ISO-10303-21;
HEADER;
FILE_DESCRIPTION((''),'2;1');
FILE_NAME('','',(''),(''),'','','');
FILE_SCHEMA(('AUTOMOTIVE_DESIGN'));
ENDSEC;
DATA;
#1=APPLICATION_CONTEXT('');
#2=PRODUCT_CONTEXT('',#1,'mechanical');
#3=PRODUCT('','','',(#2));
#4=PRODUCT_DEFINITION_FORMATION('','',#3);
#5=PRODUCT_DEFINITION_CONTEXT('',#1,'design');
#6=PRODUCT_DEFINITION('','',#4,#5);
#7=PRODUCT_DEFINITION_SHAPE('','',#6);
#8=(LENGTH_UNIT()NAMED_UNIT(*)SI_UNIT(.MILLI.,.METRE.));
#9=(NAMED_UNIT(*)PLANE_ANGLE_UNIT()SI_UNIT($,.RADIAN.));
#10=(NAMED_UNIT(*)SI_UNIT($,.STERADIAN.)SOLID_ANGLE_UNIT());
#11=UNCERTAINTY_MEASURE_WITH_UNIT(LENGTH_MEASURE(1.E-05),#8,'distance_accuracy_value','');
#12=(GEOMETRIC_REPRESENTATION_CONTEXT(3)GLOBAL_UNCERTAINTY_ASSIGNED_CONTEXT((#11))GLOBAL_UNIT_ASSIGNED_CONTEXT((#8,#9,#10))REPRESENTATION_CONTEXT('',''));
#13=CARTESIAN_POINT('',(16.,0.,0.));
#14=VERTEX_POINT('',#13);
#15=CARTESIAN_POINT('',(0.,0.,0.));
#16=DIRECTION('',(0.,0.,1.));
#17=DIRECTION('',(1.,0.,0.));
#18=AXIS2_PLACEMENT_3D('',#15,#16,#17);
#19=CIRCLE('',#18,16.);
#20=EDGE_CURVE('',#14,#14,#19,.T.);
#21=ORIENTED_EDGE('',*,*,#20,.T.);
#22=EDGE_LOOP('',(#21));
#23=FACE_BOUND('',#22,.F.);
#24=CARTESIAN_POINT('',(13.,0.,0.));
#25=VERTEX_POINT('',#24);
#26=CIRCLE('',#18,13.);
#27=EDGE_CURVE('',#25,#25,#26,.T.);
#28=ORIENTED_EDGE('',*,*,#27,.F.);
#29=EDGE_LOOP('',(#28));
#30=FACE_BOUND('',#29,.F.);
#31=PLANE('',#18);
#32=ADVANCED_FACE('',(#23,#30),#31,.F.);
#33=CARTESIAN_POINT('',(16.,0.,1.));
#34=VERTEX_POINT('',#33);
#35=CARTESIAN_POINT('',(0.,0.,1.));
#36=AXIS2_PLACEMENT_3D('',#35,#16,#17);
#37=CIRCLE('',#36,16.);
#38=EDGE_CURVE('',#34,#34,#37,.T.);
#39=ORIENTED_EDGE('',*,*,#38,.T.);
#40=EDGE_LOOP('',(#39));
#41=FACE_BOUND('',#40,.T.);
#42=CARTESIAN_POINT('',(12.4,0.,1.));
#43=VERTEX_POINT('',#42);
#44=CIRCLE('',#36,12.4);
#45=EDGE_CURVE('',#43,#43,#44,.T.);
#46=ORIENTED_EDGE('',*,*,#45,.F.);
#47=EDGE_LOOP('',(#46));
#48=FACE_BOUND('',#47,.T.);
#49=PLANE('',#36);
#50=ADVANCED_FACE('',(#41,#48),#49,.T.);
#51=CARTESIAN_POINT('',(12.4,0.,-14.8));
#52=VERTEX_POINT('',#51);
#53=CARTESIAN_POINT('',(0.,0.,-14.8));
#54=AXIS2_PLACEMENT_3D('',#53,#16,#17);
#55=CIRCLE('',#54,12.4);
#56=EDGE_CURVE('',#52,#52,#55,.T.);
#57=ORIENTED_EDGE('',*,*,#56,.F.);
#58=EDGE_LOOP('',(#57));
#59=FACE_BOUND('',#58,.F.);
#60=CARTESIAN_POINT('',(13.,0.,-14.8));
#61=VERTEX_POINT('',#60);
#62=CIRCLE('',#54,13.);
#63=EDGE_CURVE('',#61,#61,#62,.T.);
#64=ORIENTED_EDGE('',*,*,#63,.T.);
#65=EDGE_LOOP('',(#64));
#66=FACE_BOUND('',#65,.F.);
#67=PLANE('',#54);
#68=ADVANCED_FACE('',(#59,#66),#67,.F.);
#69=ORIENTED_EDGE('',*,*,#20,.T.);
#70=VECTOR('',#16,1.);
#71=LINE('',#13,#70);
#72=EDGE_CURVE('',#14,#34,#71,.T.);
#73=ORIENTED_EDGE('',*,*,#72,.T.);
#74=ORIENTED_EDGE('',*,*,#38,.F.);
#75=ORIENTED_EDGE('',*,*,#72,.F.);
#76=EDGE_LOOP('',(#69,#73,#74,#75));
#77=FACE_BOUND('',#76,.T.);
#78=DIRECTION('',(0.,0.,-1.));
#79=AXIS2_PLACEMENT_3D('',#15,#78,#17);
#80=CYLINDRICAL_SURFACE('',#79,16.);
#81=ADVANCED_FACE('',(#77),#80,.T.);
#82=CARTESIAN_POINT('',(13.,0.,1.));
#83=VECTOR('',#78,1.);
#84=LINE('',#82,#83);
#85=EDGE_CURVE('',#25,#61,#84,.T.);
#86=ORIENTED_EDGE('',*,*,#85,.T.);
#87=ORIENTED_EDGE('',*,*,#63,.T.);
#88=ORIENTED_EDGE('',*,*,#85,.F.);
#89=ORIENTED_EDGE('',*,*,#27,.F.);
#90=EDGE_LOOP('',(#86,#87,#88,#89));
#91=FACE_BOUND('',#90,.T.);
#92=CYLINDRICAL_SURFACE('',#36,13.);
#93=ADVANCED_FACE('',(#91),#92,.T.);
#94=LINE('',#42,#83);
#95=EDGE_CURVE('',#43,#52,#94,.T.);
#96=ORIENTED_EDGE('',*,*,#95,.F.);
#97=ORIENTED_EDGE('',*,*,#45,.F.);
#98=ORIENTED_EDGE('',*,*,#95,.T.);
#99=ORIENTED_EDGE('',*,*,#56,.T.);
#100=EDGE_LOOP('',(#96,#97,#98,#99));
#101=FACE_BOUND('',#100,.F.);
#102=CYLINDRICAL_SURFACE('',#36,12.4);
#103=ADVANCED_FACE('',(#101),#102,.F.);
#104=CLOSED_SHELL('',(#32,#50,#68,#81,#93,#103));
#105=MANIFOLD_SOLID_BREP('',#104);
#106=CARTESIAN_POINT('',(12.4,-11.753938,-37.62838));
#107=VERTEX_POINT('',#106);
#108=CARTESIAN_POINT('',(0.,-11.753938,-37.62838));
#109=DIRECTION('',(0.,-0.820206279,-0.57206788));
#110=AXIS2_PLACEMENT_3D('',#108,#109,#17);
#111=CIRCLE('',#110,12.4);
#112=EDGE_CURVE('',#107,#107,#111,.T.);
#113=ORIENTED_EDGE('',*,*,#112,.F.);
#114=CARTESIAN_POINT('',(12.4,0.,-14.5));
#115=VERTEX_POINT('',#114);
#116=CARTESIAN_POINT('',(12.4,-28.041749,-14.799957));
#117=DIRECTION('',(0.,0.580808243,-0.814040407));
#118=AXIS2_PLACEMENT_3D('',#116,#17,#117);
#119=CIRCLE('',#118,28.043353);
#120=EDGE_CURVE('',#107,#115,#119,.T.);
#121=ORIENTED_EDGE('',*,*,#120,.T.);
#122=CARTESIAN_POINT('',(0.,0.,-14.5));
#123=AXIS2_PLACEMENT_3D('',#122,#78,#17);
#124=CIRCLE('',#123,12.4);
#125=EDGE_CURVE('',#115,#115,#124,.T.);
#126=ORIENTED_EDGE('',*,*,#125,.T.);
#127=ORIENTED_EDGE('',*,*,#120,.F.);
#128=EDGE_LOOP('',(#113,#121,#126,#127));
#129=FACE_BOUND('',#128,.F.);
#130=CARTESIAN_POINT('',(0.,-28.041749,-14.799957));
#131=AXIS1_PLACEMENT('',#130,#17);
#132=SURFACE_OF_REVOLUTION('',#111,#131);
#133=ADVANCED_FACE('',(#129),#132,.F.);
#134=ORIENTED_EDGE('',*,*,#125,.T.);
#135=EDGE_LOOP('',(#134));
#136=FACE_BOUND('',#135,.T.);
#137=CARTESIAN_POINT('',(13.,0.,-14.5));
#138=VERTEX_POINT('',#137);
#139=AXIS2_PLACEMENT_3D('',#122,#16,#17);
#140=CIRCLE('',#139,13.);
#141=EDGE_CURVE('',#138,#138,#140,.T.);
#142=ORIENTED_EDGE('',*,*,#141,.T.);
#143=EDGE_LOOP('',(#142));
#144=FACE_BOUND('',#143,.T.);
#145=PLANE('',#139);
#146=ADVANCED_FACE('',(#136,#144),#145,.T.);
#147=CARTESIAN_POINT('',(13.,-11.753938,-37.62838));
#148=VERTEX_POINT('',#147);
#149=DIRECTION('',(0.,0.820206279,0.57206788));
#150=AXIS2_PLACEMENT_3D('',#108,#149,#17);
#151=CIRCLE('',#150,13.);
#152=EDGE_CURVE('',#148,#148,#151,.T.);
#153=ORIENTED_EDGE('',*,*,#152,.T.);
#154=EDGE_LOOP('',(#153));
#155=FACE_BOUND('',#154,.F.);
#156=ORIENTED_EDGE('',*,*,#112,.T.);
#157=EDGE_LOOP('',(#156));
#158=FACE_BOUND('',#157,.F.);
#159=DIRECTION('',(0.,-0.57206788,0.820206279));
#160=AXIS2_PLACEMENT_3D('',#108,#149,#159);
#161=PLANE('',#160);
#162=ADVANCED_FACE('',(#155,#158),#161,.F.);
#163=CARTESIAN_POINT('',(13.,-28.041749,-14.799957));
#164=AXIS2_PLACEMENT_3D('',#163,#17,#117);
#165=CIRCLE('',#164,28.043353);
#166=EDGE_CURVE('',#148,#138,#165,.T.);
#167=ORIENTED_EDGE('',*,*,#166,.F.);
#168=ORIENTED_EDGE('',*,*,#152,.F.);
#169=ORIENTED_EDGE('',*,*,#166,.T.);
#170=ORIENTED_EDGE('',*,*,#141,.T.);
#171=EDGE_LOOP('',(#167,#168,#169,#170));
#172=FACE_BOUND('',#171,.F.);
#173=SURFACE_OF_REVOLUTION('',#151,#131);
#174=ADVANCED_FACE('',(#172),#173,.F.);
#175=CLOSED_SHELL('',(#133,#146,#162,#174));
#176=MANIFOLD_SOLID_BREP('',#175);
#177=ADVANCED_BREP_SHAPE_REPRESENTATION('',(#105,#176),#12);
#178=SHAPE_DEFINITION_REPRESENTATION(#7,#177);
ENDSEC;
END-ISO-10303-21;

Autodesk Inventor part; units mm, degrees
ref_plane "YZ Plane" through (0, 0, 0) normal (1, 0, 0) x (0, 1, 0)
ref_plane "XZ Plane" through (0, 0, 0) normal (0, 1, 0) x (-1, 0, 0)
ref_plane "XY Plane" through (0, 0, 0) normal (0, 0, 1) x (1, 0, 0)
sketch "Esquisse2" plane through (0, 0, 0) normal (0, 0, 1) x (1, 0, 0)
  circle A0 centre (0, 0) radius 16
  circle A1 centre (0, 0) radius 13
  dimension "d0" = 32
  dimension "d1" = 26
extrude "Extrusion1" add sketch "Esquisse2" along normal blind 1
sketch "Esquisse3" plane through (0, 0, 1) normal (0, 0, 1) x (1, 0, 0)
  circle A0 centre (0, 0) radius 12.4
  circle A1 centre (0, 0) radius 13
  dimension "d6" = 26
  dimension "d7" = 24.8
extrude "Extrusion2" add sketch "Esquisse3" against normal blind 15.8
sketch "Esquisse4" plane through (0, 0, 0) normal (1, 0, 0) x (0, 1, 0)
  line L0 (12.4, -14.8) -> (-12.4, -14.8) construction
  line L1 (-12.4, 1) -> (12.4, 1) construction
  arc A0 (-12, -37.8) -> (0, -14.8) centre (-28.0417, -14.8) ccw
  line L2 (0, -67.4158) -> (0, 12.4026) construction
  line L3 (0, -14.8) -> (0, -44.8) construction
  line L4 (22.3657, -42.8417) -> (-48.6343, -42.8417) construction
  point P0 (0, 0)
  dimension "d9" = 30
  dimension "d10" = 23
  dimension "d17" = 12
ref_plane "Plan de construction1" through (0, 0, -14.5) normal (0, 0, 1) x (1, 0, 0)
sketch "Esquisse6" plane through (0, 0, -14.5) normal (0, 0, 1) x (1, 0, 0)
  circle A0 centre (0, 0) radius 12.4 construction
  circle A1 centre (0, 0) radius 16 construction
  circle A2 centre (0, 0) radius 13 construction
  circle A3 centre (0, 0) radius 12.4
  circle A4 centre (0, 0) radius 13
  dimension "d16" = 24.8
sweep "Balayage1" add profiles "Esquisse6" path "Esquisse4" separate body
properties part number "P013_Canon_venturiCoudé"
